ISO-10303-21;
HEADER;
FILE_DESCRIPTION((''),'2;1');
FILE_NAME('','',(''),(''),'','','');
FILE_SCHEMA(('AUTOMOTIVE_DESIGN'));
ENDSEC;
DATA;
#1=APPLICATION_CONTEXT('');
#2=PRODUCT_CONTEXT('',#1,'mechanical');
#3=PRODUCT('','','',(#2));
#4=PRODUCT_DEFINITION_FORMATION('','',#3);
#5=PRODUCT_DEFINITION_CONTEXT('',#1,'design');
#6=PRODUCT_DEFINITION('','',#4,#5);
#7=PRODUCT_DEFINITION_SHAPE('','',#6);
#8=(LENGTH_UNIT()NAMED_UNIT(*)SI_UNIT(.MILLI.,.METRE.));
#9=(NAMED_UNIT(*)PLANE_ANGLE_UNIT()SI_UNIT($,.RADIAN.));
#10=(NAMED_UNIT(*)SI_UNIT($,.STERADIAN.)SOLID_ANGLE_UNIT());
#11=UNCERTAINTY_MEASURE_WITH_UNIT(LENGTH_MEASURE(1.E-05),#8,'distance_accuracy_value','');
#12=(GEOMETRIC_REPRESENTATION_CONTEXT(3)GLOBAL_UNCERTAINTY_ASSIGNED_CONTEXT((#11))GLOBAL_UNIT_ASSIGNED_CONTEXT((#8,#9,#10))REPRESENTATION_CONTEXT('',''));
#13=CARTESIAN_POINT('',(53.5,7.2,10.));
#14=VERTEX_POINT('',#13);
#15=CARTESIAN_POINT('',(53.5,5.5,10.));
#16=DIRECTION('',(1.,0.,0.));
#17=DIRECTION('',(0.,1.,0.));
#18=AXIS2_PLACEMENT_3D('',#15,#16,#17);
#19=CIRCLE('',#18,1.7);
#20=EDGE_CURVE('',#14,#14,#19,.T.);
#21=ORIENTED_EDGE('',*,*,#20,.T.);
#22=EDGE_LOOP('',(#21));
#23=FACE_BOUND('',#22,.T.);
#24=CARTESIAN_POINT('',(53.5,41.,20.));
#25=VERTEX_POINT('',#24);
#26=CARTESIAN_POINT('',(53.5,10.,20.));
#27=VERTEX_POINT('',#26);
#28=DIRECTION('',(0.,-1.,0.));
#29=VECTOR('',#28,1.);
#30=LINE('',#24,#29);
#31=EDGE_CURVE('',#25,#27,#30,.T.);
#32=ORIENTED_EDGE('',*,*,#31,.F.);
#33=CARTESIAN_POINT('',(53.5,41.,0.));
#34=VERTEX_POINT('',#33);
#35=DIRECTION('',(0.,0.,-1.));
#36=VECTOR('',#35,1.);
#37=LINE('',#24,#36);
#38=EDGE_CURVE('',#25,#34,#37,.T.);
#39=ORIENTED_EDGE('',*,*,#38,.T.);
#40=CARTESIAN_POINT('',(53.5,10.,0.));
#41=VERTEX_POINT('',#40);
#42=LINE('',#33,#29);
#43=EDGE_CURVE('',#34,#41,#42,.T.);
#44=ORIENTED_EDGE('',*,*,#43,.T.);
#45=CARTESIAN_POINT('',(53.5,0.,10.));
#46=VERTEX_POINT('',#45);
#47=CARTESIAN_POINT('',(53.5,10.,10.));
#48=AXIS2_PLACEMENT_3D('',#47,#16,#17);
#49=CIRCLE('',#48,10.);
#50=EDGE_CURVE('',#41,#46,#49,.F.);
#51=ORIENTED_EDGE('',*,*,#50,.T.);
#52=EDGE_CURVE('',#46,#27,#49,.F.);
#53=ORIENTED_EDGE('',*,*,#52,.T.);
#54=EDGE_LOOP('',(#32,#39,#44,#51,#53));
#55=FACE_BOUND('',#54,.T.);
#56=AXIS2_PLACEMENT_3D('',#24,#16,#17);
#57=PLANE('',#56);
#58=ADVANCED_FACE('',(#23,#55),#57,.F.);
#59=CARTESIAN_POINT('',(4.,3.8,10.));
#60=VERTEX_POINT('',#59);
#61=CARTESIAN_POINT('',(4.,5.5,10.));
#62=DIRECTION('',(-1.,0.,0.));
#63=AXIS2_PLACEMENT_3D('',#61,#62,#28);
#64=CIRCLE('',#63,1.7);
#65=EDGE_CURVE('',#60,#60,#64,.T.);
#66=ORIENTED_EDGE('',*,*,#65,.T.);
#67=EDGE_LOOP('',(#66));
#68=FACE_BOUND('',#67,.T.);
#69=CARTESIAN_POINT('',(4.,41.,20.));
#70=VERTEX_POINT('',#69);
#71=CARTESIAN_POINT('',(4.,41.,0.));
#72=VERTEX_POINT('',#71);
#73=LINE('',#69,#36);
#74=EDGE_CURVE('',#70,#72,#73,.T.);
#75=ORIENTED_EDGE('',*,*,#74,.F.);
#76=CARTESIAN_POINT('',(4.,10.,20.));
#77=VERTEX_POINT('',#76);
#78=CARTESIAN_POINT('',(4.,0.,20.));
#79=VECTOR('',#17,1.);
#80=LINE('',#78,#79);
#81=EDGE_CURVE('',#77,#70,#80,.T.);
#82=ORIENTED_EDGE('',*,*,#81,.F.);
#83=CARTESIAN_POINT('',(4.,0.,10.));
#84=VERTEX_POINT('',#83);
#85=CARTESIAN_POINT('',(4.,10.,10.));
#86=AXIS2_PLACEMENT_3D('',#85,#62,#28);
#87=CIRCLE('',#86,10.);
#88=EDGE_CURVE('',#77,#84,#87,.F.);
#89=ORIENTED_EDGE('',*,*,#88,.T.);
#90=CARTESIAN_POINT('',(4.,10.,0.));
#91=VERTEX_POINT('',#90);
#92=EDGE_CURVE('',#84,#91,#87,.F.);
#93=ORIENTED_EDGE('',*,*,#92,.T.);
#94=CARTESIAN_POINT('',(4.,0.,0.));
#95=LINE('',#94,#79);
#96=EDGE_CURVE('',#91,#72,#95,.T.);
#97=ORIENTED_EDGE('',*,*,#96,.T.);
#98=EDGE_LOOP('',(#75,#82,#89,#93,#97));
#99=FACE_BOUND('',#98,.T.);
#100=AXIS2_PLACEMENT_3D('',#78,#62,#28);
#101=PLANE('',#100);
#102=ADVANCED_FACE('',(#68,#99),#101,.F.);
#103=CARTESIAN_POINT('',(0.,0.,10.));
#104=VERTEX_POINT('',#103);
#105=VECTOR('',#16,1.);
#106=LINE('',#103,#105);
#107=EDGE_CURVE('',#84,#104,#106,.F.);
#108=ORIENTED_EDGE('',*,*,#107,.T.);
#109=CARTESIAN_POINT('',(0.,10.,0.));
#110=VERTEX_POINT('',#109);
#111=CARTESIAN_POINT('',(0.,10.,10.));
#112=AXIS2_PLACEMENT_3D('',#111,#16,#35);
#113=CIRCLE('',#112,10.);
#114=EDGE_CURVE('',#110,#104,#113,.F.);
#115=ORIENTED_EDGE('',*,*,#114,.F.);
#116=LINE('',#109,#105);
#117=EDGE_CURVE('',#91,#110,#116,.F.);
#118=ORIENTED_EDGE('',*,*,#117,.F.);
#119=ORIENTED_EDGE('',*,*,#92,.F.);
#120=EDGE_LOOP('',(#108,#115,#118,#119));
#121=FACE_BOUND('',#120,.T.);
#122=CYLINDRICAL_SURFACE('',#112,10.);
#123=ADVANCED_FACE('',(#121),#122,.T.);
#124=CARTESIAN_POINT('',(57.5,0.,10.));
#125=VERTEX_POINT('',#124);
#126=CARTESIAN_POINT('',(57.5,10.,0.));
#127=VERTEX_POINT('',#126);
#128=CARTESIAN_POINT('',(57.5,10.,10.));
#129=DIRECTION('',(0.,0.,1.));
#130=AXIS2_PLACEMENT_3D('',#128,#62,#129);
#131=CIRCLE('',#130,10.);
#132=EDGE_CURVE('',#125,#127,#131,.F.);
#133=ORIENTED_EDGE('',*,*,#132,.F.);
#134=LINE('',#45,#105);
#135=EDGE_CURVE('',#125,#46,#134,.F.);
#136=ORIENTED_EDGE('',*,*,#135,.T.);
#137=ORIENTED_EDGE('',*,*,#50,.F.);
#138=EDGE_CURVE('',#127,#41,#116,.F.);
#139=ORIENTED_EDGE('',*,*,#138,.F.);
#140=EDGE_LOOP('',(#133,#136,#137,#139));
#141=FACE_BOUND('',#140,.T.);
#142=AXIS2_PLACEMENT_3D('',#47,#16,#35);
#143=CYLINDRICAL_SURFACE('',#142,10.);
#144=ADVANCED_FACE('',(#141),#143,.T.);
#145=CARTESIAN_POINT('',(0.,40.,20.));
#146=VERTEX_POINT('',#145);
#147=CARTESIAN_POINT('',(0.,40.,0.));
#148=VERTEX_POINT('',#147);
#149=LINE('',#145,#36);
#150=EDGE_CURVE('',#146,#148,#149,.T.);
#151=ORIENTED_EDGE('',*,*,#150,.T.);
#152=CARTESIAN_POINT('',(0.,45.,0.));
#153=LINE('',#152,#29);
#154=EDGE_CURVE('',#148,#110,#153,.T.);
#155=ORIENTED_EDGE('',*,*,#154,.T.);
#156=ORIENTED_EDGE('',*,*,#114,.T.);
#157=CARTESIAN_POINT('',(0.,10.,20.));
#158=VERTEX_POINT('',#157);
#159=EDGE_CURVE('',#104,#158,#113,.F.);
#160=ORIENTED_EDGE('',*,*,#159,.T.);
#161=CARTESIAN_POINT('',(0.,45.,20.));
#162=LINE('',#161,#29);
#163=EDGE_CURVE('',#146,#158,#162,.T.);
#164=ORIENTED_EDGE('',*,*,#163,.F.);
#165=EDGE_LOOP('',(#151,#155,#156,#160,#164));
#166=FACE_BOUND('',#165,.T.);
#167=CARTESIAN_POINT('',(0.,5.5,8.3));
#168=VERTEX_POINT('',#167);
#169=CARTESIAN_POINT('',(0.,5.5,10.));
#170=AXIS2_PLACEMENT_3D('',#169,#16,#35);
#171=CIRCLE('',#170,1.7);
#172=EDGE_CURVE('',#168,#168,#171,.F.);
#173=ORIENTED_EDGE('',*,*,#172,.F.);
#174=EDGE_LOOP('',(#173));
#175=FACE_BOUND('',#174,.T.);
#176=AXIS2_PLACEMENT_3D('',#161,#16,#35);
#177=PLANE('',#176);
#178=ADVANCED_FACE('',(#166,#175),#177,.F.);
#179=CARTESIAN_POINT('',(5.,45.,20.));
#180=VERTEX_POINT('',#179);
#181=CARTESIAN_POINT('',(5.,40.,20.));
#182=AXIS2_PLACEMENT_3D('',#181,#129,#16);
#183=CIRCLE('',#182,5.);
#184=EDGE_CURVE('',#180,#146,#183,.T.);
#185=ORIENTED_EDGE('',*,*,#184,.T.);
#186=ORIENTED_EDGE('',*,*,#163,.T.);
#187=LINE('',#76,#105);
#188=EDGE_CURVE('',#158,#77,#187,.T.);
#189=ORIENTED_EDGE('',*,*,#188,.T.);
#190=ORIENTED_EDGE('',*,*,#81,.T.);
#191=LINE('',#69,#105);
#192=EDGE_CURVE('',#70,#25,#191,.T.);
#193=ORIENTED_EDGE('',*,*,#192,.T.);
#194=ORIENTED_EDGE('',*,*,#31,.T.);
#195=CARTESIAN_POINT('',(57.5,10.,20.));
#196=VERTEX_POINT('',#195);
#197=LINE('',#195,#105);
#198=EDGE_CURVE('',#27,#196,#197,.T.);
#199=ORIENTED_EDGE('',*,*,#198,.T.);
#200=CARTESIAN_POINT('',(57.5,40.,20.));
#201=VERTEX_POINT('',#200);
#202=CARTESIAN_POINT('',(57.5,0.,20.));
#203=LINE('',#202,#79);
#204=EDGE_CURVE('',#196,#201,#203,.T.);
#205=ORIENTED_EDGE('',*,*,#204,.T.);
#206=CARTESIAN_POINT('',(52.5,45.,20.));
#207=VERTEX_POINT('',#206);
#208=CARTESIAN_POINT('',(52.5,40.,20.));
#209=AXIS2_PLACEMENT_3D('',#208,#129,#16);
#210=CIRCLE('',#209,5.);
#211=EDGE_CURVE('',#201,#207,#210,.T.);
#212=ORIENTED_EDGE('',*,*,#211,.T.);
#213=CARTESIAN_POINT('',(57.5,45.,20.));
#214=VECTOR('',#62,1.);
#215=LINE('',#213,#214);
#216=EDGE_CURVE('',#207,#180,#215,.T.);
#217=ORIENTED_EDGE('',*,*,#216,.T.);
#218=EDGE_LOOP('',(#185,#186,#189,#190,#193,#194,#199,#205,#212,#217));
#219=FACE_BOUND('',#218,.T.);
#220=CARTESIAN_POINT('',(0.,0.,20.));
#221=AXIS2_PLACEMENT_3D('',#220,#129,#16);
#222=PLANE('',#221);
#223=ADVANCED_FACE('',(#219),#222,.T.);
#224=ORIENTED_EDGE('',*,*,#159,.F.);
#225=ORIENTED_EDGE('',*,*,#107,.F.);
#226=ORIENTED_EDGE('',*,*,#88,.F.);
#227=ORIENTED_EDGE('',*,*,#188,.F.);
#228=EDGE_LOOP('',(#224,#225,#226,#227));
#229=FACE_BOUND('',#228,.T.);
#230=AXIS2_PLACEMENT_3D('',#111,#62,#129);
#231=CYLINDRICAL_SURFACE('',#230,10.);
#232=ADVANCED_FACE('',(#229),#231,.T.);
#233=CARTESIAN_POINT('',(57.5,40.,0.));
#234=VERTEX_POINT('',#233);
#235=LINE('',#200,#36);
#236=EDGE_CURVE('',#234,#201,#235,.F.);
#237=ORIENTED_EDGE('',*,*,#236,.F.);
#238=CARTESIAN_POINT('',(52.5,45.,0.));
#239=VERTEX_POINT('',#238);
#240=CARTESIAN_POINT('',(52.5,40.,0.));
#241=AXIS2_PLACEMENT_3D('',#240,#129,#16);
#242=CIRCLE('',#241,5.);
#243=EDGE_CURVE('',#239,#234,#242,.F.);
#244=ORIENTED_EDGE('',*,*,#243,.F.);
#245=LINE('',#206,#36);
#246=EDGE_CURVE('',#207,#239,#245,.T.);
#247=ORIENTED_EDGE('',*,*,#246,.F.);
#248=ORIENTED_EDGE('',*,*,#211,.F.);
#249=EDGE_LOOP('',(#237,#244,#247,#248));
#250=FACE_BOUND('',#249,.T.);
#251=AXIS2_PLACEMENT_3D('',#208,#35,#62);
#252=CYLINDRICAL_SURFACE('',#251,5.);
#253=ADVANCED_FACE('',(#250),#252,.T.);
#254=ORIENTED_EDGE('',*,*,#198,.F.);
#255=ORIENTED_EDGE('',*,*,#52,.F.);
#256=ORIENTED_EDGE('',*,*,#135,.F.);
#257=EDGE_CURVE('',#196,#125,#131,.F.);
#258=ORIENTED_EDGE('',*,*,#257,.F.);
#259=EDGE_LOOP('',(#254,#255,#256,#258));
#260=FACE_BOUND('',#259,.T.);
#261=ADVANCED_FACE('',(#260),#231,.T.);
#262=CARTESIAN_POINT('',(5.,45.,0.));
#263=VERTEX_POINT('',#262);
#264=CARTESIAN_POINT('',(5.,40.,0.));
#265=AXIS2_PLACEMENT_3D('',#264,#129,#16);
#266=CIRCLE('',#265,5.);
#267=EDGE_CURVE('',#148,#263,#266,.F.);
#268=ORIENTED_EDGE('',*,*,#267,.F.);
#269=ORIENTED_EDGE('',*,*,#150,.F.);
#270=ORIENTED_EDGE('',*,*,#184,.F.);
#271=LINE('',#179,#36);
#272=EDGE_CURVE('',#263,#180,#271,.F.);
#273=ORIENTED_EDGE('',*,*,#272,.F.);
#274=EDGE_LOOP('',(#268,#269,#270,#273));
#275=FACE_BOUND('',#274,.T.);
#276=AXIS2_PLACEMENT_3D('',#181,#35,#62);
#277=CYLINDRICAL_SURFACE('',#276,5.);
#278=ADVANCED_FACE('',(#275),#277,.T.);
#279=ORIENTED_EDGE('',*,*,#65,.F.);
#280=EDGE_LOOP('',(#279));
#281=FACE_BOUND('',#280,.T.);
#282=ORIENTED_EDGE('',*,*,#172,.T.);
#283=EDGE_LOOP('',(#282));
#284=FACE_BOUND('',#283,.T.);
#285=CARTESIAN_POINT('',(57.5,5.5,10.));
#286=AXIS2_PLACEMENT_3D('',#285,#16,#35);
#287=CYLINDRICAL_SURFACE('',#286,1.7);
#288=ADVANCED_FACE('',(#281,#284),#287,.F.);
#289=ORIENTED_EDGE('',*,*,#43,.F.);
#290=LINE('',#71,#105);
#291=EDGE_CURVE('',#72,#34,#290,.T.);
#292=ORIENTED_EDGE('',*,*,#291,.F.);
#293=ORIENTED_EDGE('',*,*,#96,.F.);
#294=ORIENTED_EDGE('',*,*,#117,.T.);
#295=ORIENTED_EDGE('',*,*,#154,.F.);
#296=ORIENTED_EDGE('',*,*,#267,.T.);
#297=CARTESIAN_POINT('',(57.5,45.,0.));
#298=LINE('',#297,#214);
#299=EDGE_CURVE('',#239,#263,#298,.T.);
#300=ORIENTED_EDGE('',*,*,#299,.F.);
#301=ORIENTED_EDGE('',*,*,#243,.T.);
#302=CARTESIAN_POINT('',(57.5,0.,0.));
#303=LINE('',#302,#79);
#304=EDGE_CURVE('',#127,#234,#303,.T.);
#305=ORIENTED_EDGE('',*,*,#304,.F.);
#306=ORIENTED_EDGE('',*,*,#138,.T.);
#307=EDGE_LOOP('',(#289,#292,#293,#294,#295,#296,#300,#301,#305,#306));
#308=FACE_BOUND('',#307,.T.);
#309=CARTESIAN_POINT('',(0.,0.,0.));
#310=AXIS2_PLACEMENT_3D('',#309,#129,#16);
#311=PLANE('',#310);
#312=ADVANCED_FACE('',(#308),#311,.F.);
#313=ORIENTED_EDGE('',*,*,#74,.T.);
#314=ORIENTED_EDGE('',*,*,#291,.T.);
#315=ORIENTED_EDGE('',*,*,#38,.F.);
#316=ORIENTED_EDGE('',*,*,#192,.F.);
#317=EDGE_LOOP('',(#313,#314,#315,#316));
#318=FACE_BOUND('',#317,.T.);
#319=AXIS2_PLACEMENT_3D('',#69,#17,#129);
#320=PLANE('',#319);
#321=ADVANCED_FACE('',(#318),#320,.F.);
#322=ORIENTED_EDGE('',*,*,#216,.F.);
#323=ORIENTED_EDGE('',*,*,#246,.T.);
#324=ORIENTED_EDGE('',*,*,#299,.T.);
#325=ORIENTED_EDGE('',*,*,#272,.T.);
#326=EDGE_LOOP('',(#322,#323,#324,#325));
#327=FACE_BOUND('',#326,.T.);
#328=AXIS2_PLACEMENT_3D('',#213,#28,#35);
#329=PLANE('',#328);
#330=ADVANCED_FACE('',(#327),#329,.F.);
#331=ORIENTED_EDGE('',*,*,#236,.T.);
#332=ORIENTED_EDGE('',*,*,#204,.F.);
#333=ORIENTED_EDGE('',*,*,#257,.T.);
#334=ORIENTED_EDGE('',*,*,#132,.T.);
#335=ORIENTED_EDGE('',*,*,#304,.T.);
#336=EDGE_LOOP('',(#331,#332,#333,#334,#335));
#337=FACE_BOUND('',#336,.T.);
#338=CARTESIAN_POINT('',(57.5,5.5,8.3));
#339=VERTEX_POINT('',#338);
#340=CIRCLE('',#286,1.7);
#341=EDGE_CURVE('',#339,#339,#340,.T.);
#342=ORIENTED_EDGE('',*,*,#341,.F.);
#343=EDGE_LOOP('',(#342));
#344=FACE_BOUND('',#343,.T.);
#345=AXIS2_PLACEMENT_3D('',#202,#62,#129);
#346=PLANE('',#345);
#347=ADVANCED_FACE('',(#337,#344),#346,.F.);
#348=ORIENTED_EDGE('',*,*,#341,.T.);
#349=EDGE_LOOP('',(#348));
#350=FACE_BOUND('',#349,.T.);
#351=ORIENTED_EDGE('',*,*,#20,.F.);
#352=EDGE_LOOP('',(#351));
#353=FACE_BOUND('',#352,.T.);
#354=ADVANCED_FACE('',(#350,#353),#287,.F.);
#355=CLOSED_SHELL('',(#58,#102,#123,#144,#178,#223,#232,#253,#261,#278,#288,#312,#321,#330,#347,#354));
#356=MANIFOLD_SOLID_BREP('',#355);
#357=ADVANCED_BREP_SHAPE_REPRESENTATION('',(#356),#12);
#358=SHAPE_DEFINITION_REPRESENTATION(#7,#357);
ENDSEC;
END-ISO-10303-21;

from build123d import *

# Parameters (mm, degrees)
BOSS_EXTRU_1_DEPTH      = 20
ENL_V_MAT_EXTRU_1_REACH = 77.705
ESQUISSE2_R             = 1.5
D_GAGEMENT_M31_D        = 3.4
D_GAGEMENT_M31_DEPTH    = 57.5
D_GAGEMENT_M31_TIP      = 1.021463052
CONG_1_R                = 10
CONG_2_R                = 5


with BuildPart() as part:
    # Esquisse1 → Boss.-Extru.1 (new body)
    with BuildSketch(Plane.XY):
        Polygon((0, 0), (4, 0), (4, 41), (53.5, 41), (53.5, 0), (57.5, 0), (57.5, 45), (0, 45), align=None)
    extrude(amount=BOSS_EXTRU_1_DEPTH)

    # Enlèv. mat.-Extru.1: up to this face of the body (flat: up to its plane)
    enl_v_mat_extru_1_end = Plane(part.part.faces().sort_by_distance((0, 22.5, 10))[0])
    # Esquisse2 → Enlèv. mat.-Extru.1 (cut, up to the picked face)
    with BuildSketch(Plane(origin=(57.5, 0, 0), x_dir=(0, 0, -1), z_dir=(1, 0, 0)), mode=Mode.PRIVATE) as enl_v_mat_extru_1_sk1:
        with Locations((-10, 5.5)):
            Circle(ESQUISSE2_R)
    enl_v_mat_extru_1_tool1 = split(extrude(enl_v_mat_extru_1_sk1.sketch, amount=-ENL_V_MAT_EXTRU_1_REACH, mode=Mode.PRIVATE), bisect_by=enl_v_mat_extru_1_end, keep=Keep.BOTH, mode=Mode.PRIVATE)
    add(enl_v_mat_extru_1_tool1.solids().sort_by(Axis((57.5, 5.5, 10), (-1, 0, 0)))[0], mode=Mode.SUBTRACT)

    # Dégagement M31
    with Locations(Plane(origin=(57.5, 0, 0), x_dir=(0, 0, -1), z_dir=(1, 0, 0))):
        with Locations((-10, 5.5)):
            Hole(D_GAGEMENT_M31_D / 2, depth=D_GAGEMENT_M31_DEPTH)
            with Locations((0, 0, -(D_GAGEMENT_M31_DEPTH + D_GAGEMENT_M31_TIP / 2))):  # 118° drill point
                Cone(0, D_GAGEMENT_M31_D / 2, D_GAGEMENT_M31_TIP, mode=Mode.SUBTRACT)

    # Congé1
    cong_1_edges = [part.edges().sort_by_distance(p)[0] for p in [
        (55.5, 0, 0),
        (55.5, 0, 20),
        (2, 0, 0),
        (2, 0, 20),
    ]]
    fillet(cong_1_edges, radius=CONG_1_R - 0.0001)  # a hair under: the kernel refuses the full size

    # Congé2
    cong_2_edges = [part.edges().sort_by_distance(p)[0] for p in [
        (0, 45, 10),
        (57.5, 45, 10),
    ]]
    fillet(cong_2_edges, radius=CONG_2_R)


solid = part.part
